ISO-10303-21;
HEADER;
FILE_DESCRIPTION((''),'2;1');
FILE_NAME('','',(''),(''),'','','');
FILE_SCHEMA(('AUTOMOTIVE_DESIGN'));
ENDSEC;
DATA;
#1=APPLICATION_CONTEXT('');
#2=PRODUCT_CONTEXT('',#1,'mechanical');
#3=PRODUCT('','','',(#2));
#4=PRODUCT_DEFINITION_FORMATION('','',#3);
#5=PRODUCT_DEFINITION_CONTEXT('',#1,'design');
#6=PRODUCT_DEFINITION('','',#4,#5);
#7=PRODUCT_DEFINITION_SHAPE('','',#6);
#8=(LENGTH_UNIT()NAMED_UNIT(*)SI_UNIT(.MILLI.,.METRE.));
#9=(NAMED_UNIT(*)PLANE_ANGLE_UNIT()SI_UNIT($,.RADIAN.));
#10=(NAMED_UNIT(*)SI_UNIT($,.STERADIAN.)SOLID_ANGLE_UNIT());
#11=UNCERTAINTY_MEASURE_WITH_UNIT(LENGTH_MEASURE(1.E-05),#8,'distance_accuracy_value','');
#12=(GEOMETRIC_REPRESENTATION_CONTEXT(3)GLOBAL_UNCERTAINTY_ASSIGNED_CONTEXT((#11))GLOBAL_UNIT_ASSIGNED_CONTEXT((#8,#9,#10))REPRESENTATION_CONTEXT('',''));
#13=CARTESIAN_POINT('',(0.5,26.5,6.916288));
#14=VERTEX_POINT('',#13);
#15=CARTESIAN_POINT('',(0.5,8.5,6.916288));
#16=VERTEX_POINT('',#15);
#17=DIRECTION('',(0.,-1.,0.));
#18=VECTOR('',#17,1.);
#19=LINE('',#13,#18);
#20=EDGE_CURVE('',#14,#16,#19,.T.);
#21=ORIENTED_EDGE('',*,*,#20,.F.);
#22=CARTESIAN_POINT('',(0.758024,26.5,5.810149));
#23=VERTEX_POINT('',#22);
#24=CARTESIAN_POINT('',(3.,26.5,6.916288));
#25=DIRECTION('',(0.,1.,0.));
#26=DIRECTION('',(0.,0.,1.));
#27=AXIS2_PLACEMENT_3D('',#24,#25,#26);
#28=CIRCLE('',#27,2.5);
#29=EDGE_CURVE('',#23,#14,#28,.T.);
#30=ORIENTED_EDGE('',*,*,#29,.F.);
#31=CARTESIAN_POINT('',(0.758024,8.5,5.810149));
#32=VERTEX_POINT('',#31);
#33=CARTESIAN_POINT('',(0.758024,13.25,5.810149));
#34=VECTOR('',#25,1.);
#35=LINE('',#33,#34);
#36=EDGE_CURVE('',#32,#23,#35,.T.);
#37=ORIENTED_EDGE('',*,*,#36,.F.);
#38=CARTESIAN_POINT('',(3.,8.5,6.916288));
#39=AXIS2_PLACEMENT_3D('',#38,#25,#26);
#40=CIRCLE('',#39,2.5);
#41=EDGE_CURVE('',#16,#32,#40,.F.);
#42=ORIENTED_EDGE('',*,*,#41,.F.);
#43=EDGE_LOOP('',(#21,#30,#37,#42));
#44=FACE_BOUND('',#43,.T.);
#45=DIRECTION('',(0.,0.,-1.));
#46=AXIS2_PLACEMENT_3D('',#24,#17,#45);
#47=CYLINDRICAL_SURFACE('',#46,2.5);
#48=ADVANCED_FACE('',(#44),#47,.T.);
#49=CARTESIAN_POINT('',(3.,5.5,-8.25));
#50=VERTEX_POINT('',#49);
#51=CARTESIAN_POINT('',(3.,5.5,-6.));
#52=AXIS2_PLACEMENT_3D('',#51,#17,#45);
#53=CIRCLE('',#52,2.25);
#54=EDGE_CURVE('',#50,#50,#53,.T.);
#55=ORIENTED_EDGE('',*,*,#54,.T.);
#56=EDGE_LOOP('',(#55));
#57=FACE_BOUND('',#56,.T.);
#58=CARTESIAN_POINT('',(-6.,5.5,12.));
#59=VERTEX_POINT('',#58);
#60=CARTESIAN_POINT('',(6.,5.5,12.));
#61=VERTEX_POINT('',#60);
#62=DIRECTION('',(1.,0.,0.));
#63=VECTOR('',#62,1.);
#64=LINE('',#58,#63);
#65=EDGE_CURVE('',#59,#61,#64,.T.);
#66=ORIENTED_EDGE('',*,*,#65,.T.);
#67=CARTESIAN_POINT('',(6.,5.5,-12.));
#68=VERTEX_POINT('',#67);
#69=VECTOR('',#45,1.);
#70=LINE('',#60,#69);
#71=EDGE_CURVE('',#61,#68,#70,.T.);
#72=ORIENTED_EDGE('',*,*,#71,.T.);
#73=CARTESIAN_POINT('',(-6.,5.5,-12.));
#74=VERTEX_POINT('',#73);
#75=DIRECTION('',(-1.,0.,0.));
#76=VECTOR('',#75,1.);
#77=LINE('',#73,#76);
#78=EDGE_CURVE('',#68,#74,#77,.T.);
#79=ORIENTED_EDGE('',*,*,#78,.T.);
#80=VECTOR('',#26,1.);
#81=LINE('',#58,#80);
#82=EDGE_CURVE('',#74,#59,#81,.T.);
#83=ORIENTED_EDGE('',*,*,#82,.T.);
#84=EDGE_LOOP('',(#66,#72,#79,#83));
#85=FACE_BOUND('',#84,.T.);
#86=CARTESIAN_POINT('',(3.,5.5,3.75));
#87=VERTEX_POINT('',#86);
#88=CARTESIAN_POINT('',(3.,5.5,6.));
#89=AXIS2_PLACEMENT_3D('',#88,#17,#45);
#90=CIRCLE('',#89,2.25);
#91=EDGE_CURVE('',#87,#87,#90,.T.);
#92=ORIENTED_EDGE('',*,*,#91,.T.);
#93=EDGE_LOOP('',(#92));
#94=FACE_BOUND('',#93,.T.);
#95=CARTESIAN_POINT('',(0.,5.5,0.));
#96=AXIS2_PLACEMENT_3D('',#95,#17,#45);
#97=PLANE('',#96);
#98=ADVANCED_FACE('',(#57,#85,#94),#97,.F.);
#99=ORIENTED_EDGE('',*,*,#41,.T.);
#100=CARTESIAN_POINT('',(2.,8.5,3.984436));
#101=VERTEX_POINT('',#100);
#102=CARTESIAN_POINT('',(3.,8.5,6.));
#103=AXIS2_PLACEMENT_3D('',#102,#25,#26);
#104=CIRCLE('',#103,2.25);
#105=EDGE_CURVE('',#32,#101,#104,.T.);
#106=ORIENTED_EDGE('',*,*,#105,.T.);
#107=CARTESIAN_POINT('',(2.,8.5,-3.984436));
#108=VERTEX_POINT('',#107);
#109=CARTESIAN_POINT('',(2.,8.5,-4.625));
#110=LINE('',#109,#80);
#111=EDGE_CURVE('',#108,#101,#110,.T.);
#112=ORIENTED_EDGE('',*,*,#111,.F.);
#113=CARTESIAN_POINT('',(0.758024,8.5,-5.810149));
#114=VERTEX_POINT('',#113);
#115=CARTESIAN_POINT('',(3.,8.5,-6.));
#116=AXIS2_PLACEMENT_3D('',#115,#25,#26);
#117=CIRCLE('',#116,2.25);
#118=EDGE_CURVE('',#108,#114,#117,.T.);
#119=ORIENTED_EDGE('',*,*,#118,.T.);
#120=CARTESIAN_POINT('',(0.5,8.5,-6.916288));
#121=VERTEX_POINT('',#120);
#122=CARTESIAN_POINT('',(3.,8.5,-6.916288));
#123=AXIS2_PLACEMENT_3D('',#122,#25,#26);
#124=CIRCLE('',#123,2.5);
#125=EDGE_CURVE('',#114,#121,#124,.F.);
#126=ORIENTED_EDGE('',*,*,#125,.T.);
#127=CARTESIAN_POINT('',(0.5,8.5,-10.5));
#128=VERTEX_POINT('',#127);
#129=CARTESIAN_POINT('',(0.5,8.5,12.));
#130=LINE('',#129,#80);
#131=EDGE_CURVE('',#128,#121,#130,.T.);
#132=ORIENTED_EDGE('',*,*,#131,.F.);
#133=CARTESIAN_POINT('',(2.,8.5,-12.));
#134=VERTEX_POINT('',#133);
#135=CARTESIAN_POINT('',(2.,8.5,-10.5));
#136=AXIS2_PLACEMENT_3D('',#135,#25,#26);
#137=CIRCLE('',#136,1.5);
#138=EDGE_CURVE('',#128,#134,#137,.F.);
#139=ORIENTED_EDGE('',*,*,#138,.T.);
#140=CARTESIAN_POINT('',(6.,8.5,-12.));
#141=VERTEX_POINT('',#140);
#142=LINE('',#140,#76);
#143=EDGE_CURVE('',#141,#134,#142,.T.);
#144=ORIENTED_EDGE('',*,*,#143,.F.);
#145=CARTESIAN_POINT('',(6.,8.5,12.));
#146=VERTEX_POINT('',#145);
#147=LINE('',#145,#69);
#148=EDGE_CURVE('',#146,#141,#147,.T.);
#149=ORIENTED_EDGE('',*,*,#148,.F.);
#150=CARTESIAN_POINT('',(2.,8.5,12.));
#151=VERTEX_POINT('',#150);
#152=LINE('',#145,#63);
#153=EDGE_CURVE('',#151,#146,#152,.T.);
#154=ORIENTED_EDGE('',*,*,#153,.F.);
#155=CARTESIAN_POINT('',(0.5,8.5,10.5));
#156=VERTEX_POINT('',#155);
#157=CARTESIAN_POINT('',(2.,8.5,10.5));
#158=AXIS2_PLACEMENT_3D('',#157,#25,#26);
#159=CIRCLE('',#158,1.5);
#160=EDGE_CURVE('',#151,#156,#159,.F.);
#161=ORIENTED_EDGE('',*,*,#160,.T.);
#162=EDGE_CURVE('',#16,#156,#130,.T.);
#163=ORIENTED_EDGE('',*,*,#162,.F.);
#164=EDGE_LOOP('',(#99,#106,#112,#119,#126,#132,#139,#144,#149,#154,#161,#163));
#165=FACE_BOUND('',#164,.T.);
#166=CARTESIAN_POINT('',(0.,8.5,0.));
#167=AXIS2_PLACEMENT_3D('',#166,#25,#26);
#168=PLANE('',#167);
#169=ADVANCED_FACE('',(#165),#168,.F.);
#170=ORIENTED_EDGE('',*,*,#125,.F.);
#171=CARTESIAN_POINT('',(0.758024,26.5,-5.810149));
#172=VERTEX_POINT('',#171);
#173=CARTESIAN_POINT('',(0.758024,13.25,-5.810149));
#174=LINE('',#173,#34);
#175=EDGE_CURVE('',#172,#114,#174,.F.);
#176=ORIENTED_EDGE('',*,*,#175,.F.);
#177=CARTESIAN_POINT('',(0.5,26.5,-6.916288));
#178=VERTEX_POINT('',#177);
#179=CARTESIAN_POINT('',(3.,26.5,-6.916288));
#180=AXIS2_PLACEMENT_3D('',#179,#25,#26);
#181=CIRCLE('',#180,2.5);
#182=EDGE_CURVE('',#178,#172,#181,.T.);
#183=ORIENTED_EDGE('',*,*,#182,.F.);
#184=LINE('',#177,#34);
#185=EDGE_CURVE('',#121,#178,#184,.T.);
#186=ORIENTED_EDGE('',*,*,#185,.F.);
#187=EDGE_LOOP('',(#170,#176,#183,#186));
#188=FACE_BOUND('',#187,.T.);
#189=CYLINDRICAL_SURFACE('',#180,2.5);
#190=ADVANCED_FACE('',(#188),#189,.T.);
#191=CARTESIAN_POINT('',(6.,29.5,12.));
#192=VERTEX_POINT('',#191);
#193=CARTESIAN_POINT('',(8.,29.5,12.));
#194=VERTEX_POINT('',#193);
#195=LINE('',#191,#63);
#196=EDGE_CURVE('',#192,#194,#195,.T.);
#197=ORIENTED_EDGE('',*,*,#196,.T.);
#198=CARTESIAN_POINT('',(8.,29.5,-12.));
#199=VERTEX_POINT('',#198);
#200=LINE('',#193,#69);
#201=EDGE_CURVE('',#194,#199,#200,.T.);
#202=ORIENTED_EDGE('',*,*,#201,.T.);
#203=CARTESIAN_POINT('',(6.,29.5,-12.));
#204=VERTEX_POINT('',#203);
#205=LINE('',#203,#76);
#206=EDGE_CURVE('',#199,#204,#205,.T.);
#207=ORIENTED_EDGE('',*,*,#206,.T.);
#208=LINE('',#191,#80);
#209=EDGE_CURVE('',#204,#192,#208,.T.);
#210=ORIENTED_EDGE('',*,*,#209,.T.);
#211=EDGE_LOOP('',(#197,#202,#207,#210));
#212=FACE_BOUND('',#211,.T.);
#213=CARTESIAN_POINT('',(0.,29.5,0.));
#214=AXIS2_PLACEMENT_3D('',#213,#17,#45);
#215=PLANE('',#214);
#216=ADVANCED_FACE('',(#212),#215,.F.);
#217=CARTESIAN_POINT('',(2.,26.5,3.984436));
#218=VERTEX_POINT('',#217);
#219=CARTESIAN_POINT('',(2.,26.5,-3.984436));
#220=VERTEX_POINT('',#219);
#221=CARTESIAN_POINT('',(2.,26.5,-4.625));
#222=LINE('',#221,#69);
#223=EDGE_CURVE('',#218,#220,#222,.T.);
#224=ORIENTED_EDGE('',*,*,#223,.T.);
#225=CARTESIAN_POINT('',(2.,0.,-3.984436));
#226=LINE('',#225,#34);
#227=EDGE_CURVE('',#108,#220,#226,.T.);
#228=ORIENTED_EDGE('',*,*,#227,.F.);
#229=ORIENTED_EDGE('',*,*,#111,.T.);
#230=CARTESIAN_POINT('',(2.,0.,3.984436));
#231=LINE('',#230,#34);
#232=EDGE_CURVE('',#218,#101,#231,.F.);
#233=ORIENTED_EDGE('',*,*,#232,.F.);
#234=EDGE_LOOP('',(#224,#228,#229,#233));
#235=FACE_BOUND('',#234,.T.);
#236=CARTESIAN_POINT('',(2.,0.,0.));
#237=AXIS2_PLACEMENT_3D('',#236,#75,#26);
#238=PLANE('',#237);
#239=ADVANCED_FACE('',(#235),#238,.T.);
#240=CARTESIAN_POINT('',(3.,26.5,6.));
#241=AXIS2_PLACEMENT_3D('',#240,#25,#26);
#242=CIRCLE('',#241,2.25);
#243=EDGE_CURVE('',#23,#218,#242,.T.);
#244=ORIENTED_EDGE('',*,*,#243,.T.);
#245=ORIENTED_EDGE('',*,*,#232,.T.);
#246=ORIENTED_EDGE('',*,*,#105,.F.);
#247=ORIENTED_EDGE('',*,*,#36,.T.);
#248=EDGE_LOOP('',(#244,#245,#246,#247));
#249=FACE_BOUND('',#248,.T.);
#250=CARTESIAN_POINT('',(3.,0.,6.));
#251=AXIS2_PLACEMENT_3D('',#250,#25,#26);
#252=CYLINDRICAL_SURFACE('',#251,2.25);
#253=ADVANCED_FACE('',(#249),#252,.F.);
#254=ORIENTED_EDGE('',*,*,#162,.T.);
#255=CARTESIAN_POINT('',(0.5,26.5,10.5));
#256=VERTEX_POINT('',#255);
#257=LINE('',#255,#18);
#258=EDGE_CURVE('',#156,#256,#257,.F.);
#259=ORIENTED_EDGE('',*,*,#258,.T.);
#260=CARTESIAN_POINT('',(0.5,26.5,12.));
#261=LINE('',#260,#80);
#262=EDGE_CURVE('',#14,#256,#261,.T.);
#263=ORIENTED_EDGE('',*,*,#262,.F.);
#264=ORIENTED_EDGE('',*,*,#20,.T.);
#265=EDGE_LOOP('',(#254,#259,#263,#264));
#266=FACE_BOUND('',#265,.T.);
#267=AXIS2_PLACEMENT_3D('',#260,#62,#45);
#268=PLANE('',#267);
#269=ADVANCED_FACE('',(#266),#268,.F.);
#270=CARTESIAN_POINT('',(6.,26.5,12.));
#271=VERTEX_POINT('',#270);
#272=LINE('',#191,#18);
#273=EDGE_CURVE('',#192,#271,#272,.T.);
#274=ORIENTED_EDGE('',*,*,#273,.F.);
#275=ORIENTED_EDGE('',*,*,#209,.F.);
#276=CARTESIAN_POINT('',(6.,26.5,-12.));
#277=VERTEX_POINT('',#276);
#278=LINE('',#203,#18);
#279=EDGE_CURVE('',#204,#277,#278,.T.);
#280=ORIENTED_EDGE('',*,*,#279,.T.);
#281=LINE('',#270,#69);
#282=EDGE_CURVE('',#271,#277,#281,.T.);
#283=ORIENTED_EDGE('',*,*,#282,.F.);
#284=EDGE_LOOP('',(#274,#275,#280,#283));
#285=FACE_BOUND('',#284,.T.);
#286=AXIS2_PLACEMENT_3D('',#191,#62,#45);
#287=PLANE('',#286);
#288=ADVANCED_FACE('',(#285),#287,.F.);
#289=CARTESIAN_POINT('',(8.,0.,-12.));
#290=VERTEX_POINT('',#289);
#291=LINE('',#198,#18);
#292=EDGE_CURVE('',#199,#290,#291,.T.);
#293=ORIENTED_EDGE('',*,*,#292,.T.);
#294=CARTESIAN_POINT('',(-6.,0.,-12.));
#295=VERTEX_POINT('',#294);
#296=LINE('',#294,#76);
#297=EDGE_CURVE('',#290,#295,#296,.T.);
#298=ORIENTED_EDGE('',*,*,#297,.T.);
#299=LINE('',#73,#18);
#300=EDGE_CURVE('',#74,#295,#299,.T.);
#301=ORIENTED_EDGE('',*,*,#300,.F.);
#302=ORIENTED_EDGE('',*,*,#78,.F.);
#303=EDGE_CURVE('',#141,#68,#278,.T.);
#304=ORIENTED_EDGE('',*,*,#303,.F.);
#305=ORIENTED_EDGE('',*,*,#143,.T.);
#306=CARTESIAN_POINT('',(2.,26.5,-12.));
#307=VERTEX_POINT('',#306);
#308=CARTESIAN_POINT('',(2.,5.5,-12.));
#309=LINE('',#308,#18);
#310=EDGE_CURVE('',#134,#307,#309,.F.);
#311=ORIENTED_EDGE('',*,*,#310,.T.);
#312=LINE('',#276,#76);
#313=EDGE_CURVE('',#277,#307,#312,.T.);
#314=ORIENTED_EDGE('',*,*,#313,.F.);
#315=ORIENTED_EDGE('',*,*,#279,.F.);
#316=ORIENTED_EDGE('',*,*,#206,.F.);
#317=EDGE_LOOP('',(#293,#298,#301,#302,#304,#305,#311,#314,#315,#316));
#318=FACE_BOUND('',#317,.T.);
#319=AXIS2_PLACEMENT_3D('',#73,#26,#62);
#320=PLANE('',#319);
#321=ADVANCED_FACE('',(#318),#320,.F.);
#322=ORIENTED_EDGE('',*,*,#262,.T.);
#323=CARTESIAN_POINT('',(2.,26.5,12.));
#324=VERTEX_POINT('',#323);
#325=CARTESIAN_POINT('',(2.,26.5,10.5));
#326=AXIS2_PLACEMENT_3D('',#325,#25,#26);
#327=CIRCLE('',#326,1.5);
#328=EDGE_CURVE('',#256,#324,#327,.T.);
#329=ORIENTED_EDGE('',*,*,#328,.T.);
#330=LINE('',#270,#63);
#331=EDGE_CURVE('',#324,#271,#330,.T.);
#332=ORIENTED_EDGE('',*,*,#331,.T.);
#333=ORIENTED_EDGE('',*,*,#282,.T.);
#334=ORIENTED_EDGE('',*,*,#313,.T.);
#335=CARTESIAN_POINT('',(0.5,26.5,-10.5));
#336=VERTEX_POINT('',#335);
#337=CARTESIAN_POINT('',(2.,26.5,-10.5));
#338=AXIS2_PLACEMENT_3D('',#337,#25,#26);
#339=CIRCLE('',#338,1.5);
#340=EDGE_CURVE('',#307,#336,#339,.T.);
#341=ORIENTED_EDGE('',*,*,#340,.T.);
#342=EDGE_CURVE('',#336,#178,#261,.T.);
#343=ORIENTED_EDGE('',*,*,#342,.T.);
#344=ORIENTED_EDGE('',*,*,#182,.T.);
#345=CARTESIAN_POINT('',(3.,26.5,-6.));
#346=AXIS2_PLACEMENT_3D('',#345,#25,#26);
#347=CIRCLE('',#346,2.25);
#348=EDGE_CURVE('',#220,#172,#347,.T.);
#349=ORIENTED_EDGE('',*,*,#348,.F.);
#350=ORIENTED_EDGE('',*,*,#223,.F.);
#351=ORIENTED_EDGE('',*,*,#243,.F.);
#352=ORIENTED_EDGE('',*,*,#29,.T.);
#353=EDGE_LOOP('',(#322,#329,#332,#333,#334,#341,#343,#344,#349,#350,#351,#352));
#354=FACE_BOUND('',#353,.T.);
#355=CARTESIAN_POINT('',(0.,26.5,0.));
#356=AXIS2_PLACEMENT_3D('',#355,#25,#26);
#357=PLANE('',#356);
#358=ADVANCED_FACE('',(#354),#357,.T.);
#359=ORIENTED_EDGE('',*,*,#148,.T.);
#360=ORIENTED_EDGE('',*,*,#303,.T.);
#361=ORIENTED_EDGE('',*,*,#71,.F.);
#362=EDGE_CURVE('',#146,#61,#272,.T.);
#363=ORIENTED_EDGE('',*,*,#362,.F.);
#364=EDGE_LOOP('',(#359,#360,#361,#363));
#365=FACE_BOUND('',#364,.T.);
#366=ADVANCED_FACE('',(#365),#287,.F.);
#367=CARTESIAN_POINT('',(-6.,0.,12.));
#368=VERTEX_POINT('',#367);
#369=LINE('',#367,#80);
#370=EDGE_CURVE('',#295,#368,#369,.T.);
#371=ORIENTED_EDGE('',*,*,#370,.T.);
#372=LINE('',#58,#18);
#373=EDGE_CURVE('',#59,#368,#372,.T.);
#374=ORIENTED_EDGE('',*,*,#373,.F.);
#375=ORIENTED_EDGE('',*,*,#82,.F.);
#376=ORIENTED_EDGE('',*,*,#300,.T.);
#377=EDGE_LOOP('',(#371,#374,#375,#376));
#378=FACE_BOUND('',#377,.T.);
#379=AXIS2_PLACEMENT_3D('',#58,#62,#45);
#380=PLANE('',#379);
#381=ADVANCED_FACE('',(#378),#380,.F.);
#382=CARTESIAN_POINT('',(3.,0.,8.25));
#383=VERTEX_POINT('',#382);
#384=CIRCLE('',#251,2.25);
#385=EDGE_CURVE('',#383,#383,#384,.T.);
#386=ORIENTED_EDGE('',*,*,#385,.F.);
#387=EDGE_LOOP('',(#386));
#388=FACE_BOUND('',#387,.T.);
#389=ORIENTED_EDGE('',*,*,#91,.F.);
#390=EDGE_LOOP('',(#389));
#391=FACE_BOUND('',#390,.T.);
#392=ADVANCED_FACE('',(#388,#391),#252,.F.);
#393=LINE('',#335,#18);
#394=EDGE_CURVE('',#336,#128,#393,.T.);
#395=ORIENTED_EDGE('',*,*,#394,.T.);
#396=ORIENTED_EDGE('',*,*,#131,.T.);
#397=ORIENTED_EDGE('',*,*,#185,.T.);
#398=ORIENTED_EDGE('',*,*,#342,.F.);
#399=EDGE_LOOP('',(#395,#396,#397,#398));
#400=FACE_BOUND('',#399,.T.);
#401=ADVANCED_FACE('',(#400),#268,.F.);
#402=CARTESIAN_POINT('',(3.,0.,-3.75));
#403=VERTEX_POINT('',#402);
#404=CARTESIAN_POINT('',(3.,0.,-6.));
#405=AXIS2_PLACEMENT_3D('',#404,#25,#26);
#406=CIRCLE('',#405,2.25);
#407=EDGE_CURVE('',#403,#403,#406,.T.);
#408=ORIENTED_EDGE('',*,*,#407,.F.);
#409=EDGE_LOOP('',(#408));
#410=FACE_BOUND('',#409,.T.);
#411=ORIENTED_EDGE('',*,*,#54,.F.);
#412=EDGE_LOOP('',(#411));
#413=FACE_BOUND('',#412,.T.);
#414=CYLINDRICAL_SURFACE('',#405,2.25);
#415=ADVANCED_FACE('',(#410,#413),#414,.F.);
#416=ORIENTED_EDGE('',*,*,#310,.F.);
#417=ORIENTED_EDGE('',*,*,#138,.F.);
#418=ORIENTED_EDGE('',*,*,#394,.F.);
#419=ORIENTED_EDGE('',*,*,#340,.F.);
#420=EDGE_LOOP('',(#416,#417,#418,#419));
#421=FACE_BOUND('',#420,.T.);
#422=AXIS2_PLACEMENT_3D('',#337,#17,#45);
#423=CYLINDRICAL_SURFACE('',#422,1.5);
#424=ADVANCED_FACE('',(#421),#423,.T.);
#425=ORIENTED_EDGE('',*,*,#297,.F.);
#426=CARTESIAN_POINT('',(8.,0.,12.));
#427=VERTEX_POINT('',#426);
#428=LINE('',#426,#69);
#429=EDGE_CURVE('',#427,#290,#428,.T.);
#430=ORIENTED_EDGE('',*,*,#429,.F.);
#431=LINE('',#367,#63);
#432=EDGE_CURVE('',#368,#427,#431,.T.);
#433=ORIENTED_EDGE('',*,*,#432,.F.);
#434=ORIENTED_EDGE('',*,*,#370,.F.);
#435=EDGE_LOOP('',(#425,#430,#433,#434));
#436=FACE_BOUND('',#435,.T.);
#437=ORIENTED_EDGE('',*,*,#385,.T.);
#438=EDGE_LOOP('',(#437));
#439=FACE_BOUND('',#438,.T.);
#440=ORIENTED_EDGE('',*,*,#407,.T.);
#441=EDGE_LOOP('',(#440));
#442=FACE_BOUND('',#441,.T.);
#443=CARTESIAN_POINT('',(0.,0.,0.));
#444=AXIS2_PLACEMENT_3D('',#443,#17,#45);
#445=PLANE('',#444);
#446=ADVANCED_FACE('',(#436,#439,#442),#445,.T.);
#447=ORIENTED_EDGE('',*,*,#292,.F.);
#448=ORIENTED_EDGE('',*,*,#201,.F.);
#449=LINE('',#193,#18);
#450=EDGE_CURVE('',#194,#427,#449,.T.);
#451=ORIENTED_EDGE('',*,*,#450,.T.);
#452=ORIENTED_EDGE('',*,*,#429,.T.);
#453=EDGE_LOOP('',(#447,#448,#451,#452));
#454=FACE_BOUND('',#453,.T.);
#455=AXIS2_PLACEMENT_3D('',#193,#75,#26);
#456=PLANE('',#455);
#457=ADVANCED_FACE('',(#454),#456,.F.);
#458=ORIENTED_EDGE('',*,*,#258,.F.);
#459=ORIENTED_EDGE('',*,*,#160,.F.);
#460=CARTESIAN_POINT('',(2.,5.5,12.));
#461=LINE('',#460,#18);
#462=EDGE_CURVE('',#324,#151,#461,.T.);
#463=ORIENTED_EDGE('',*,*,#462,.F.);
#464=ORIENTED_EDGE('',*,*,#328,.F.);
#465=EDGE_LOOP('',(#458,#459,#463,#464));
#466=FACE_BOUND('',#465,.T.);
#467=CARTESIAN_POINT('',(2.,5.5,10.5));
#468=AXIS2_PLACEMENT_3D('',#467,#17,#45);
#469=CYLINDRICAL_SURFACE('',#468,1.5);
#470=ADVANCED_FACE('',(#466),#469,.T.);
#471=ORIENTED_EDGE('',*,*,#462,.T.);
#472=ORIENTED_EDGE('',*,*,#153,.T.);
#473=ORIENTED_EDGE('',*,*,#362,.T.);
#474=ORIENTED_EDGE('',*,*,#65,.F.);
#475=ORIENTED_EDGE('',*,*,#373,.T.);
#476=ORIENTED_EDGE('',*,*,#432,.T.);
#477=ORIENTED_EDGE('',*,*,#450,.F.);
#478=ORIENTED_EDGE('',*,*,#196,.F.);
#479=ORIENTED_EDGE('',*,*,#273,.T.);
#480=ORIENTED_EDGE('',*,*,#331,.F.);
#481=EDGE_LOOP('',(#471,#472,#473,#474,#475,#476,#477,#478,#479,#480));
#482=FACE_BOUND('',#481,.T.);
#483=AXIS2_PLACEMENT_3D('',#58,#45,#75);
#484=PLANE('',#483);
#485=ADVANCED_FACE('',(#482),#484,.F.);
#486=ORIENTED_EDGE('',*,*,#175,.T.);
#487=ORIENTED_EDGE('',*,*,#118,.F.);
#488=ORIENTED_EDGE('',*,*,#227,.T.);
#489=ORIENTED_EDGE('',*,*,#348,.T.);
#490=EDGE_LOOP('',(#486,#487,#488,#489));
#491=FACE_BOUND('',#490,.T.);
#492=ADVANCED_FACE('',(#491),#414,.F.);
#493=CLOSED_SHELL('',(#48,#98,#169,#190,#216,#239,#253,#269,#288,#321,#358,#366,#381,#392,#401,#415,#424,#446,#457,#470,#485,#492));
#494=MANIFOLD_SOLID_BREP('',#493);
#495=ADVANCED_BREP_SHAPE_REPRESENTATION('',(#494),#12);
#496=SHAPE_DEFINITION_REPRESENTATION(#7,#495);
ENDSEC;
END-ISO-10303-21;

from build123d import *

# Parameters (mm, degrees)
SKETCH1_W           = 12
SKETCH1_H           = 24
BOSS_EXTRUDE1_DEPTH = 5.5
SKETCH2_W           = 2
SKETCH2_H           = 24
BOSS_EXTRUDE2_DEPTH = 29.5
BOSS_EXTRUDE4_START = 3
SKETCH4_W           = 5.5
SKETCH4_H           = 24
BOSS_EXTRUDE4_DEPTH = 18
SKETCH5_W           = 9.25
SKETCH5_H           = 18
CUT_EXTRUDE1_DEPTH  = 1.5
FILLET1_R           = 2.5
SKETCH6_R           = 2.25
CUT_EXTRUDE2_DEPTH  = 31.170349683
FILLET2_R           = 1.5


with BuildPart() as part:
    # Sketch1 → Boss-Extrude1 (new body)
    with BuildSketch(Plane(origin=(0, 0, 0), x_dir=(1, 0, 0), z_dir=(0, 1, 0))):
        Rectangle(SKETCH1_W, SKETCH1_H)
    extrude(amount=BOSS_EXTRUDE1_DEPTH)

    # Sketch2 → Boss-Extrude2 (add)
    with BuildSketch(Plane(origin=(0, 0, 0), x_dir=(1, 0, 0), z_dir=(0, 1, 0))):
        with Locations((7, 0)):
            Rectangle(SKETCH2_W, SKETCH2_H)
    extrude(amount=BOSS_EXTRUDE2_DEPTH)

    # Sketch4 → Boss-Extrude4 (add)
    with BuildSketch(Plane(origin=(0, 5.5, 0), x_dir=(1, 0, 0), z_dir=(0, 1, 0)).offset(BOSS_EXTRUDE4_START)):
        with Locations((3.25, 0)):
            Rectangle(SKETCH4_W, SKETCH4_H)
    extrude(amount=BOSS_EXTRUDE4_DEPTH)

    # Sketch5 → Cut-Extrude1 (cut)
    with BuildSketch(Plane.ZY.offset(-0.5)):
        with Locations((0, 17.5)):
            Rectangle(SKETCH5_W, SKETCH5_H)
    extrude(amount=-CUT_EXTRUDE1_DEPTH, mode=Mode.SUBTRACT)

    # Fillet1
    # the kernel refuses this fillet: 2.5 mm, written as the material it takes off along each edge
    with BuildSketch(Plane(origin=(0.5, 32.228219619, 4.625), x_dir=(0, 0, 1), z_dir=(0, -1, 0)), Plane(origin=(0.5, 8.5, -4.625), x_dir=(0, 0, -1), z_dir=(0, 1, 0))) as fillet1_piece_1:
        with BuildLine():
            CenterArc((2.291287847, -2.5), FILLET1_R, 90, 66.421821522)
            Line((0, -1.5), (0, 0))
            Line((0, 0), (2.291287847, 0))
        make_face()
    extrude(amount=23.728219619, mode=Mode.SUBTRACT)

    # Sketch6 → Cut-Extrude2 (cut, through all)
    with BuildSketch(Plane(origin=(0, 26.5, 0), x_dir=(1, 0, 0), z_dir=(0, 1, 0))):
        with Locations(Location((3, -6, 0), (0, 0, 270))):
            Circle(SKETCH6_R)
        with Locations(Location((3, 6, 0), (0, 0, 270))):
            Circle(SKETCH6_R)
    extrude(amount=-CUT_EXTRUDE2_DEPTH, mode=Mode.SUBTRACT)

    # Fillet2
    fillet2_edges = [part.edges().sort_by_distance(p)[0] for p in [
        (0.5, 17.5, -12),
        (0.5, 17.5, 12),
    ]]
    fillet(fillet2_edges, radius=FILLET2_R)


solid = part.part
